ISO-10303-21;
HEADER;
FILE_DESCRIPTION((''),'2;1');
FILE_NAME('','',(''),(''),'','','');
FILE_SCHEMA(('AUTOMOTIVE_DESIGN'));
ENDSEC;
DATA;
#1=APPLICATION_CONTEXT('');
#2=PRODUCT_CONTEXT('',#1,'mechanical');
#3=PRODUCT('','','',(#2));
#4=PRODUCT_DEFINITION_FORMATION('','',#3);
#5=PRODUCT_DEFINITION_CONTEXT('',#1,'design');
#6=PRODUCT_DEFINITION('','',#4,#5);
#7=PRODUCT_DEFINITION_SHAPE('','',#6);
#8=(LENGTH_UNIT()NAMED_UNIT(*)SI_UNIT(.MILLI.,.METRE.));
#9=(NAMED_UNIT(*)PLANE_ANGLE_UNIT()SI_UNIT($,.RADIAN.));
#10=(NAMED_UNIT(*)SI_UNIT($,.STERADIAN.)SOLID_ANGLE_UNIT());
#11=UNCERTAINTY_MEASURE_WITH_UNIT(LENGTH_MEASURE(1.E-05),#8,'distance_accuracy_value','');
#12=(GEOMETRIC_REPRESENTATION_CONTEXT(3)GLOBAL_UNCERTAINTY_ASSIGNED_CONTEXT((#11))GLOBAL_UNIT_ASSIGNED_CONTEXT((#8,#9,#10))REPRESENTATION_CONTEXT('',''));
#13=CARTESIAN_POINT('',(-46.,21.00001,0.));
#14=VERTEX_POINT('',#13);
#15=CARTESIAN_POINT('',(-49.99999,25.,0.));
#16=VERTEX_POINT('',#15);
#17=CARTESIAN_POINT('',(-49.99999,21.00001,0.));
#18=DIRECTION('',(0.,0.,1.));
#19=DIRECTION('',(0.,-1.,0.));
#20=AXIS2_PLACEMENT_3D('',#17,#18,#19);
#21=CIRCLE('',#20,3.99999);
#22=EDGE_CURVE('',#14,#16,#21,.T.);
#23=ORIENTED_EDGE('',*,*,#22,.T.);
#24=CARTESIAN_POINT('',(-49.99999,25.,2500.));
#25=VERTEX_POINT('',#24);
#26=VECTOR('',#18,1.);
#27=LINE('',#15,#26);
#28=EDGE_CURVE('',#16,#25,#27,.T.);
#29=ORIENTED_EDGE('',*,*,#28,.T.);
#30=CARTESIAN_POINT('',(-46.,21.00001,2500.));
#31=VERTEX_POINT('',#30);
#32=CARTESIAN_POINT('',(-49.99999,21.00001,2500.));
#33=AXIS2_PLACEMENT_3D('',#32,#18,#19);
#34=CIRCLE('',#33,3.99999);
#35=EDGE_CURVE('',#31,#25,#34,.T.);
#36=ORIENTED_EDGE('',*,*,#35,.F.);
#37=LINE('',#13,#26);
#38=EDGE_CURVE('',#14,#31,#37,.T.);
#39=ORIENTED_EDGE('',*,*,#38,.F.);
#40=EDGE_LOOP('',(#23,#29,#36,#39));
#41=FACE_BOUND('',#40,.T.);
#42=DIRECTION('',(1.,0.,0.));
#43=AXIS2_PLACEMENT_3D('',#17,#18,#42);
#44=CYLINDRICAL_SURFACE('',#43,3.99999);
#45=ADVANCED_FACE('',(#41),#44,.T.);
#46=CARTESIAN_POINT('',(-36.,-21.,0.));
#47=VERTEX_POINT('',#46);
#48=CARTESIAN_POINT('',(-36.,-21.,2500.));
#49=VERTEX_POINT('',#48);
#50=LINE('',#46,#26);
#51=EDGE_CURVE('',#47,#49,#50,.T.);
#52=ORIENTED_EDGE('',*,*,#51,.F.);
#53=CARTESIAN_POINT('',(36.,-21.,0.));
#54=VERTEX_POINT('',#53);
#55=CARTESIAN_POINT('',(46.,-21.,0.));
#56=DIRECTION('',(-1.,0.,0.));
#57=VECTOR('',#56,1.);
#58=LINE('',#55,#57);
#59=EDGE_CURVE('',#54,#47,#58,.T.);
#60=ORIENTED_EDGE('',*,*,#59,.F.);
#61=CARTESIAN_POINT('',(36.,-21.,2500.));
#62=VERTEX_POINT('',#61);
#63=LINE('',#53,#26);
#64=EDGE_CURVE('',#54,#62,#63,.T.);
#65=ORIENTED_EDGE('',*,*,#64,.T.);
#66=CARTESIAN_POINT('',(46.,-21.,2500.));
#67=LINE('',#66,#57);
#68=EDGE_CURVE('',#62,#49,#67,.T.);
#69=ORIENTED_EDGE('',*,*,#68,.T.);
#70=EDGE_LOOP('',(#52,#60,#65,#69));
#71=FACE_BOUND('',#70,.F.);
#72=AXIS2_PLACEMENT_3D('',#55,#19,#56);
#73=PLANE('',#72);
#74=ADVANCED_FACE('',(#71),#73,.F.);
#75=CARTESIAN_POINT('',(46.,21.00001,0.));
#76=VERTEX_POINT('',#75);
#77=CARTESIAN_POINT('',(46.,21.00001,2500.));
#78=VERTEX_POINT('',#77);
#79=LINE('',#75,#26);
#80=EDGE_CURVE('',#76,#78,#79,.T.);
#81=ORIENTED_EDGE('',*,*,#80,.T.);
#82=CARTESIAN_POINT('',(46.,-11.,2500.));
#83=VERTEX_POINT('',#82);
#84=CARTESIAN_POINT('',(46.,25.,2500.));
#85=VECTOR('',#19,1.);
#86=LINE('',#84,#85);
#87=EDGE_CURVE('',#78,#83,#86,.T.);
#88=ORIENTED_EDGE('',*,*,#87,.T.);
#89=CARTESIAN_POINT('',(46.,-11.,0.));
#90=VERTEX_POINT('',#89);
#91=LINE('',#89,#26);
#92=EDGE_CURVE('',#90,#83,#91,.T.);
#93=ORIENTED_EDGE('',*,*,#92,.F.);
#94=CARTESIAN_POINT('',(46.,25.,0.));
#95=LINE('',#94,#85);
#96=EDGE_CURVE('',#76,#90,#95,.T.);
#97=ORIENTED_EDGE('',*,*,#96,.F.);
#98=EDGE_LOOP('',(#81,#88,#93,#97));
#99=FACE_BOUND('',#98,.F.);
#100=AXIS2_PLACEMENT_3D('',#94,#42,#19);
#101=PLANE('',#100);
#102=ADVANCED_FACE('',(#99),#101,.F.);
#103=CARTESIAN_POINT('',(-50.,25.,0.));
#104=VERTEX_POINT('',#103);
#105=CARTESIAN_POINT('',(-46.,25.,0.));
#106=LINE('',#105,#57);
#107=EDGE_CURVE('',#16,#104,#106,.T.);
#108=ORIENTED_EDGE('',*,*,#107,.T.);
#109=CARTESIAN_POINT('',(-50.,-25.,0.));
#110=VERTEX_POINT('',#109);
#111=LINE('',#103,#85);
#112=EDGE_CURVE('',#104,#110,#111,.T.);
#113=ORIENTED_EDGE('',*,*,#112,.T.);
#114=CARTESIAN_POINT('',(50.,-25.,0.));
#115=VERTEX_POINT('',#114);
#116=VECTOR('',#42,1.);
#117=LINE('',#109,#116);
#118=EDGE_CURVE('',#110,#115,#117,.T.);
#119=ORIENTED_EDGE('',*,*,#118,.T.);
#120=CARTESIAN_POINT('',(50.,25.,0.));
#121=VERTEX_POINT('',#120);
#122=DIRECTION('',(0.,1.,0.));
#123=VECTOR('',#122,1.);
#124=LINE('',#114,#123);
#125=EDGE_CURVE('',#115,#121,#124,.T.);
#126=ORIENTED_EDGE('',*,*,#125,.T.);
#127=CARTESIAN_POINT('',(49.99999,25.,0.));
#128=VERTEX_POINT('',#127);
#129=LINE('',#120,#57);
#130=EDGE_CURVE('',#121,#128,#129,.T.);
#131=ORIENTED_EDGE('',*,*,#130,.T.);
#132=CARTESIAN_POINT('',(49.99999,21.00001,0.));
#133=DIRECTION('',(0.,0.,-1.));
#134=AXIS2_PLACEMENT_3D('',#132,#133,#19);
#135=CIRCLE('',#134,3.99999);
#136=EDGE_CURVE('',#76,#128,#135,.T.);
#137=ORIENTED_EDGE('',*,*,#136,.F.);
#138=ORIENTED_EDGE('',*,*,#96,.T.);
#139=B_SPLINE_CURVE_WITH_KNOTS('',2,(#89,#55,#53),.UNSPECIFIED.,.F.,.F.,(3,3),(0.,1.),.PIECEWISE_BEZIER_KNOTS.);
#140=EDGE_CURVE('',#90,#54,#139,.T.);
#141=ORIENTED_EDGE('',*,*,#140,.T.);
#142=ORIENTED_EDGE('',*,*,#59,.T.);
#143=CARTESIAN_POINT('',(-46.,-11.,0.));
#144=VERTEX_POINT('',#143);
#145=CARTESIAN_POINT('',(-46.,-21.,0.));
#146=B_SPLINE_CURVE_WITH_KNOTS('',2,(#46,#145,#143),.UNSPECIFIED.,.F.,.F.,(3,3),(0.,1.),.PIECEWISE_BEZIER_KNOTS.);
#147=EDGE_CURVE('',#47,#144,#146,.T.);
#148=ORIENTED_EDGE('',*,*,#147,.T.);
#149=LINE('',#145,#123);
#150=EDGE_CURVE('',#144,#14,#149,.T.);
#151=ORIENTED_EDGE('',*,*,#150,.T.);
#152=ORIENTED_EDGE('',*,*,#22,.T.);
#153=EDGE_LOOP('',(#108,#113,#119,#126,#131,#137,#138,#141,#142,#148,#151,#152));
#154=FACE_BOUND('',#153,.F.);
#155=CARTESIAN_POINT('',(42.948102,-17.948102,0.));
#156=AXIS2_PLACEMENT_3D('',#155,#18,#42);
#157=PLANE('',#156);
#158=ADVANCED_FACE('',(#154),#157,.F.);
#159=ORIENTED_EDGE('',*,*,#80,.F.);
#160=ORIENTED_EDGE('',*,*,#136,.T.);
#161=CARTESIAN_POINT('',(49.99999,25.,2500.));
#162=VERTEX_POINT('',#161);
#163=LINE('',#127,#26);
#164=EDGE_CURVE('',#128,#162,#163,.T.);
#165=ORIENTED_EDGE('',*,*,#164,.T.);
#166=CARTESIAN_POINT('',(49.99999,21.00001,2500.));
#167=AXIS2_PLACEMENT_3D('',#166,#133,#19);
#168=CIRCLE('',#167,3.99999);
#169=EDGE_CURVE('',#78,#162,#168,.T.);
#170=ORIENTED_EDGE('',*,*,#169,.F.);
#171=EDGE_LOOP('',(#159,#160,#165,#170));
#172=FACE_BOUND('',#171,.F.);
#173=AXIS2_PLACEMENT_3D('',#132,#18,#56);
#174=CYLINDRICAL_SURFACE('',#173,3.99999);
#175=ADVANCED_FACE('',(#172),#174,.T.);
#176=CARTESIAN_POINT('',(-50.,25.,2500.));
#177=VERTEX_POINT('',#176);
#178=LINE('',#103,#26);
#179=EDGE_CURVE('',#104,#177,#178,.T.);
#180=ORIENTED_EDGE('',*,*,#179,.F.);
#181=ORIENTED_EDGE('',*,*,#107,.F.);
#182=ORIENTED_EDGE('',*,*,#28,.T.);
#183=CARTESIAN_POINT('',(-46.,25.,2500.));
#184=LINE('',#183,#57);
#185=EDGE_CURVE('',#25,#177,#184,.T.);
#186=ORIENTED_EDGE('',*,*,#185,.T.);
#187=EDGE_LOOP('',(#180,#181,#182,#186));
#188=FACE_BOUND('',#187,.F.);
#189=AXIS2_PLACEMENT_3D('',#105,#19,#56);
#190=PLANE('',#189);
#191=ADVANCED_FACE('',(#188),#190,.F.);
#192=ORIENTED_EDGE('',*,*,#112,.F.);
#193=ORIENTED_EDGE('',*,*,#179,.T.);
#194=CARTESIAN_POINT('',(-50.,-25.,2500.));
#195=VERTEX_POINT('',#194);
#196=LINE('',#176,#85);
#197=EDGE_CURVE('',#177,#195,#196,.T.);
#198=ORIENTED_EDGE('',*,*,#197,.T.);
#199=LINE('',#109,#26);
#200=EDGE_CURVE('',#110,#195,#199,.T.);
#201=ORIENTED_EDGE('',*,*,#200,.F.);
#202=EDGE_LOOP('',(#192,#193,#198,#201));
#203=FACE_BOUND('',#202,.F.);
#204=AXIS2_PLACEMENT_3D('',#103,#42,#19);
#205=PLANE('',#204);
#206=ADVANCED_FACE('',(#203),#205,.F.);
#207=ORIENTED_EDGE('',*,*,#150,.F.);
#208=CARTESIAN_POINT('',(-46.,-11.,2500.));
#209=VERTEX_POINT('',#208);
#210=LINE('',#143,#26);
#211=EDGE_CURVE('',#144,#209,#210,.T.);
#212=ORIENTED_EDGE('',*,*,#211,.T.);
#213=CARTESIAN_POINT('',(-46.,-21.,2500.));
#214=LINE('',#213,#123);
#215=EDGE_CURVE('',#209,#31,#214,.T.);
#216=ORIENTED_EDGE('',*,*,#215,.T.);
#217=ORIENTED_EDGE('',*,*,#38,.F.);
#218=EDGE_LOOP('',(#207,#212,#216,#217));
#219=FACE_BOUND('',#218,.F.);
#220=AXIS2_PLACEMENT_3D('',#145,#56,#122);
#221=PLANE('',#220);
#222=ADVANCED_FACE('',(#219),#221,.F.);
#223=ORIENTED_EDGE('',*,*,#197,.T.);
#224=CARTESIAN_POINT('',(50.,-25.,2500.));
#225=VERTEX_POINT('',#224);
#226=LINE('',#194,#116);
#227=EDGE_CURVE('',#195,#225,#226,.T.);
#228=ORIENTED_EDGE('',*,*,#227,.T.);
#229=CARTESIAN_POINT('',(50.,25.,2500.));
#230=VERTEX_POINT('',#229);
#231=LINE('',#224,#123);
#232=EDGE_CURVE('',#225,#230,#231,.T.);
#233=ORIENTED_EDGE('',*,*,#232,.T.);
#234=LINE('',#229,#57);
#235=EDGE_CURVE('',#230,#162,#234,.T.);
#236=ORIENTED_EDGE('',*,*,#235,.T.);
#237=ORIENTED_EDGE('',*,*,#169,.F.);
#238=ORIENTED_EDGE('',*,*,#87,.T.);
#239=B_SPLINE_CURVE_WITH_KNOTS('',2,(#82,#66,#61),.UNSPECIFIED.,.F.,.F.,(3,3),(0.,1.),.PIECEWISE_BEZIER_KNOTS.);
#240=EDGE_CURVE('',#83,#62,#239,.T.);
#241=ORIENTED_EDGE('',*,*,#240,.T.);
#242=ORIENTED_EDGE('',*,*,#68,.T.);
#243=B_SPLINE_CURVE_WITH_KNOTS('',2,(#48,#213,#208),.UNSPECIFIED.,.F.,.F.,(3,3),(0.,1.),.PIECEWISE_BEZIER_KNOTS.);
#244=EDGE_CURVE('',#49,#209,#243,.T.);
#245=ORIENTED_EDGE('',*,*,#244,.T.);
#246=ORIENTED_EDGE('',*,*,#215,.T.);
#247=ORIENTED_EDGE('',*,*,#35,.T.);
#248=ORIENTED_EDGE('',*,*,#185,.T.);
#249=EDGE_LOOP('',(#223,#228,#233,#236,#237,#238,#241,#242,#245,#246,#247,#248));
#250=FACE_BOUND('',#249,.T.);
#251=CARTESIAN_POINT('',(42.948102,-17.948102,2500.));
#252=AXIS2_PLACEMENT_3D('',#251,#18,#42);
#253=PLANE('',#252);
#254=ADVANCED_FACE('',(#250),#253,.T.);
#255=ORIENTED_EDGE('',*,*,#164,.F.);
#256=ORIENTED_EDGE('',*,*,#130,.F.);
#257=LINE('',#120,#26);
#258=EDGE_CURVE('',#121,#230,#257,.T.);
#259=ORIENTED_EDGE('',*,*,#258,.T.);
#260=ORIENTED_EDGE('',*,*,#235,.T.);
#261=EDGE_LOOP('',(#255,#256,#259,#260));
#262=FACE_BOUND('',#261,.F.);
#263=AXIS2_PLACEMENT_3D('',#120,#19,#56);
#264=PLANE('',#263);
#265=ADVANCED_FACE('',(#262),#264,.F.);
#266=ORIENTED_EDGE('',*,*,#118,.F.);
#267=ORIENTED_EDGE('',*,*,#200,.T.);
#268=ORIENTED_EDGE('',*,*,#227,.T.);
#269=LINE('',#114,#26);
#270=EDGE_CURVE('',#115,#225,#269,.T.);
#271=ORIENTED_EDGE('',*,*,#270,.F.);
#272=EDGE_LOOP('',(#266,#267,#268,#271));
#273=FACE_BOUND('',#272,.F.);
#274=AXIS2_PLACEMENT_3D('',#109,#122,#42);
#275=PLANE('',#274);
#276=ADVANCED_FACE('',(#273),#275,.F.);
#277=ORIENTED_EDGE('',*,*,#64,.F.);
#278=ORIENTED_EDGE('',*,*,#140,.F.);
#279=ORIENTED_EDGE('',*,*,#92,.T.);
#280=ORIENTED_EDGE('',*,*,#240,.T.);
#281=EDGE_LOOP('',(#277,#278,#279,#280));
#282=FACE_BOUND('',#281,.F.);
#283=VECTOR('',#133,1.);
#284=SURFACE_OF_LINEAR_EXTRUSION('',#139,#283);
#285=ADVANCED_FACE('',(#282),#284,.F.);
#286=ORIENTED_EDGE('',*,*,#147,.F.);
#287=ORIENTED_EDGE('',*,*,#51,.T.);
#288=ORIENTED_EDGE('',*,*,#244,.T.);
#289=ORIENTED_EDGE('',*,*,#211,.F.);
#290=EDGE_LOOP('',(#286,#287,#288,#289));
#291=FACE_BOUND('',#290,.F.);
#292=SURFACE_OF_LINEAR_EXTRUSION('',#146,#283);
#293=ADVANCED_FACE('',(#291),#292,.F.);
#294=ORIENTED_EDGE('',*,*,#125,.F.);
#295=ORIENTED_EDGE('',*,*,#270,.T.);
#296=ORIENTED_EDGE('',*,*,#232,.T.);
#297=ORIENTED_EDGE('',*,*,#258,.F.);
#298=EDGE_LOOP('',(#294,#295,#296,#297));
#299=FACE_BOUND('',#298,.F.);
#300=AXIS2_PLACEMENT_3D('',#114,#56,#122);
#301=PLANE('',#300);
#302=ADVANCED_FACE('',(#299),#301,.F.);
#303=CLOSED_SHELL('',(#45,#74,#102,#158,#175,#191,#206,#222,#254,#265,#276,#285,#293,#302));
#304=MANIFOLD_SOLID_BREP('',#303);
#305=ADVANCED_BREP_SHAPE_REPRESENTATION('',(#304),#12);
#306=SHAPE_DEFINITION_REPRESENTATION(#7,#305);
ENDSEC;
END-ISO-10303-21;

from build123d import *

# Parameters (mm, degrees)
F1_DEPTH    = 2500
F2_T1_DEPTH = 2500
F3_R        = 3.99999


# Not quite as in the source:
# - a fillet or chamfer that OpenCascade refuses, or shapes differently, is made with other operations: its cross-section is extruded or revolved along the edge and cut away or added
# - a fillet or chamfer is up to 0.001 mm smaller than in the source, because OpenCascade refuses the exact size


with BuildPart() as f1:
    # F0 (on Top) → F1 (new body)
    with BuildSketch(Plane.XY):
        Polygon((-50, -25), (50, -25), (50, 25), (46, 25), (46, -21), (-46, -21), (-46, 25), (-50, 25), align=None)
    extrude(amount=F1_DEPTH)

    # F2: fillet of radius 10 on 2 edges, made by hand

    # F2_s2 → F2_t1 (join)
    with BuildSketch(Plane.XY):
        with BuildLine():
            add(Edge.make_bspline(
                [(46, -11), (46, -21), (36, -21)],
                knots=[0, 0, 0, 1, 1, 1], degree=2, weights=[1, 1, 1]))
            Line((36, -21), (46, -21))
            Line((46, -21), (46, -11))
        make_face()
        with BuildLine():
            add(Edge.make_bspline(
                [(-36, -21), (-46, -21), (-46, -11)],
                knots=[0, 0, 0, 1, 1, 1], degree=2, weights=[1, 1, 1]))
            Line((-46, -11), (-46, -21))
            Line((-46, -21), (-36, -21))
        make_face()
    extrude(amount=F2_T1_DEPTH)

    # F3 (radius 4 in the source; OpenCascade refuses exactly that, so slightly less here)
    f3_edges = [f1.edges().sort_by_distance(p)[0] for p in [
        (-46, 25, 1250),
        (46, 25, 1250),
    ]]
    fillet(f3_edges, radius=F3_R)


solid = f1.part
